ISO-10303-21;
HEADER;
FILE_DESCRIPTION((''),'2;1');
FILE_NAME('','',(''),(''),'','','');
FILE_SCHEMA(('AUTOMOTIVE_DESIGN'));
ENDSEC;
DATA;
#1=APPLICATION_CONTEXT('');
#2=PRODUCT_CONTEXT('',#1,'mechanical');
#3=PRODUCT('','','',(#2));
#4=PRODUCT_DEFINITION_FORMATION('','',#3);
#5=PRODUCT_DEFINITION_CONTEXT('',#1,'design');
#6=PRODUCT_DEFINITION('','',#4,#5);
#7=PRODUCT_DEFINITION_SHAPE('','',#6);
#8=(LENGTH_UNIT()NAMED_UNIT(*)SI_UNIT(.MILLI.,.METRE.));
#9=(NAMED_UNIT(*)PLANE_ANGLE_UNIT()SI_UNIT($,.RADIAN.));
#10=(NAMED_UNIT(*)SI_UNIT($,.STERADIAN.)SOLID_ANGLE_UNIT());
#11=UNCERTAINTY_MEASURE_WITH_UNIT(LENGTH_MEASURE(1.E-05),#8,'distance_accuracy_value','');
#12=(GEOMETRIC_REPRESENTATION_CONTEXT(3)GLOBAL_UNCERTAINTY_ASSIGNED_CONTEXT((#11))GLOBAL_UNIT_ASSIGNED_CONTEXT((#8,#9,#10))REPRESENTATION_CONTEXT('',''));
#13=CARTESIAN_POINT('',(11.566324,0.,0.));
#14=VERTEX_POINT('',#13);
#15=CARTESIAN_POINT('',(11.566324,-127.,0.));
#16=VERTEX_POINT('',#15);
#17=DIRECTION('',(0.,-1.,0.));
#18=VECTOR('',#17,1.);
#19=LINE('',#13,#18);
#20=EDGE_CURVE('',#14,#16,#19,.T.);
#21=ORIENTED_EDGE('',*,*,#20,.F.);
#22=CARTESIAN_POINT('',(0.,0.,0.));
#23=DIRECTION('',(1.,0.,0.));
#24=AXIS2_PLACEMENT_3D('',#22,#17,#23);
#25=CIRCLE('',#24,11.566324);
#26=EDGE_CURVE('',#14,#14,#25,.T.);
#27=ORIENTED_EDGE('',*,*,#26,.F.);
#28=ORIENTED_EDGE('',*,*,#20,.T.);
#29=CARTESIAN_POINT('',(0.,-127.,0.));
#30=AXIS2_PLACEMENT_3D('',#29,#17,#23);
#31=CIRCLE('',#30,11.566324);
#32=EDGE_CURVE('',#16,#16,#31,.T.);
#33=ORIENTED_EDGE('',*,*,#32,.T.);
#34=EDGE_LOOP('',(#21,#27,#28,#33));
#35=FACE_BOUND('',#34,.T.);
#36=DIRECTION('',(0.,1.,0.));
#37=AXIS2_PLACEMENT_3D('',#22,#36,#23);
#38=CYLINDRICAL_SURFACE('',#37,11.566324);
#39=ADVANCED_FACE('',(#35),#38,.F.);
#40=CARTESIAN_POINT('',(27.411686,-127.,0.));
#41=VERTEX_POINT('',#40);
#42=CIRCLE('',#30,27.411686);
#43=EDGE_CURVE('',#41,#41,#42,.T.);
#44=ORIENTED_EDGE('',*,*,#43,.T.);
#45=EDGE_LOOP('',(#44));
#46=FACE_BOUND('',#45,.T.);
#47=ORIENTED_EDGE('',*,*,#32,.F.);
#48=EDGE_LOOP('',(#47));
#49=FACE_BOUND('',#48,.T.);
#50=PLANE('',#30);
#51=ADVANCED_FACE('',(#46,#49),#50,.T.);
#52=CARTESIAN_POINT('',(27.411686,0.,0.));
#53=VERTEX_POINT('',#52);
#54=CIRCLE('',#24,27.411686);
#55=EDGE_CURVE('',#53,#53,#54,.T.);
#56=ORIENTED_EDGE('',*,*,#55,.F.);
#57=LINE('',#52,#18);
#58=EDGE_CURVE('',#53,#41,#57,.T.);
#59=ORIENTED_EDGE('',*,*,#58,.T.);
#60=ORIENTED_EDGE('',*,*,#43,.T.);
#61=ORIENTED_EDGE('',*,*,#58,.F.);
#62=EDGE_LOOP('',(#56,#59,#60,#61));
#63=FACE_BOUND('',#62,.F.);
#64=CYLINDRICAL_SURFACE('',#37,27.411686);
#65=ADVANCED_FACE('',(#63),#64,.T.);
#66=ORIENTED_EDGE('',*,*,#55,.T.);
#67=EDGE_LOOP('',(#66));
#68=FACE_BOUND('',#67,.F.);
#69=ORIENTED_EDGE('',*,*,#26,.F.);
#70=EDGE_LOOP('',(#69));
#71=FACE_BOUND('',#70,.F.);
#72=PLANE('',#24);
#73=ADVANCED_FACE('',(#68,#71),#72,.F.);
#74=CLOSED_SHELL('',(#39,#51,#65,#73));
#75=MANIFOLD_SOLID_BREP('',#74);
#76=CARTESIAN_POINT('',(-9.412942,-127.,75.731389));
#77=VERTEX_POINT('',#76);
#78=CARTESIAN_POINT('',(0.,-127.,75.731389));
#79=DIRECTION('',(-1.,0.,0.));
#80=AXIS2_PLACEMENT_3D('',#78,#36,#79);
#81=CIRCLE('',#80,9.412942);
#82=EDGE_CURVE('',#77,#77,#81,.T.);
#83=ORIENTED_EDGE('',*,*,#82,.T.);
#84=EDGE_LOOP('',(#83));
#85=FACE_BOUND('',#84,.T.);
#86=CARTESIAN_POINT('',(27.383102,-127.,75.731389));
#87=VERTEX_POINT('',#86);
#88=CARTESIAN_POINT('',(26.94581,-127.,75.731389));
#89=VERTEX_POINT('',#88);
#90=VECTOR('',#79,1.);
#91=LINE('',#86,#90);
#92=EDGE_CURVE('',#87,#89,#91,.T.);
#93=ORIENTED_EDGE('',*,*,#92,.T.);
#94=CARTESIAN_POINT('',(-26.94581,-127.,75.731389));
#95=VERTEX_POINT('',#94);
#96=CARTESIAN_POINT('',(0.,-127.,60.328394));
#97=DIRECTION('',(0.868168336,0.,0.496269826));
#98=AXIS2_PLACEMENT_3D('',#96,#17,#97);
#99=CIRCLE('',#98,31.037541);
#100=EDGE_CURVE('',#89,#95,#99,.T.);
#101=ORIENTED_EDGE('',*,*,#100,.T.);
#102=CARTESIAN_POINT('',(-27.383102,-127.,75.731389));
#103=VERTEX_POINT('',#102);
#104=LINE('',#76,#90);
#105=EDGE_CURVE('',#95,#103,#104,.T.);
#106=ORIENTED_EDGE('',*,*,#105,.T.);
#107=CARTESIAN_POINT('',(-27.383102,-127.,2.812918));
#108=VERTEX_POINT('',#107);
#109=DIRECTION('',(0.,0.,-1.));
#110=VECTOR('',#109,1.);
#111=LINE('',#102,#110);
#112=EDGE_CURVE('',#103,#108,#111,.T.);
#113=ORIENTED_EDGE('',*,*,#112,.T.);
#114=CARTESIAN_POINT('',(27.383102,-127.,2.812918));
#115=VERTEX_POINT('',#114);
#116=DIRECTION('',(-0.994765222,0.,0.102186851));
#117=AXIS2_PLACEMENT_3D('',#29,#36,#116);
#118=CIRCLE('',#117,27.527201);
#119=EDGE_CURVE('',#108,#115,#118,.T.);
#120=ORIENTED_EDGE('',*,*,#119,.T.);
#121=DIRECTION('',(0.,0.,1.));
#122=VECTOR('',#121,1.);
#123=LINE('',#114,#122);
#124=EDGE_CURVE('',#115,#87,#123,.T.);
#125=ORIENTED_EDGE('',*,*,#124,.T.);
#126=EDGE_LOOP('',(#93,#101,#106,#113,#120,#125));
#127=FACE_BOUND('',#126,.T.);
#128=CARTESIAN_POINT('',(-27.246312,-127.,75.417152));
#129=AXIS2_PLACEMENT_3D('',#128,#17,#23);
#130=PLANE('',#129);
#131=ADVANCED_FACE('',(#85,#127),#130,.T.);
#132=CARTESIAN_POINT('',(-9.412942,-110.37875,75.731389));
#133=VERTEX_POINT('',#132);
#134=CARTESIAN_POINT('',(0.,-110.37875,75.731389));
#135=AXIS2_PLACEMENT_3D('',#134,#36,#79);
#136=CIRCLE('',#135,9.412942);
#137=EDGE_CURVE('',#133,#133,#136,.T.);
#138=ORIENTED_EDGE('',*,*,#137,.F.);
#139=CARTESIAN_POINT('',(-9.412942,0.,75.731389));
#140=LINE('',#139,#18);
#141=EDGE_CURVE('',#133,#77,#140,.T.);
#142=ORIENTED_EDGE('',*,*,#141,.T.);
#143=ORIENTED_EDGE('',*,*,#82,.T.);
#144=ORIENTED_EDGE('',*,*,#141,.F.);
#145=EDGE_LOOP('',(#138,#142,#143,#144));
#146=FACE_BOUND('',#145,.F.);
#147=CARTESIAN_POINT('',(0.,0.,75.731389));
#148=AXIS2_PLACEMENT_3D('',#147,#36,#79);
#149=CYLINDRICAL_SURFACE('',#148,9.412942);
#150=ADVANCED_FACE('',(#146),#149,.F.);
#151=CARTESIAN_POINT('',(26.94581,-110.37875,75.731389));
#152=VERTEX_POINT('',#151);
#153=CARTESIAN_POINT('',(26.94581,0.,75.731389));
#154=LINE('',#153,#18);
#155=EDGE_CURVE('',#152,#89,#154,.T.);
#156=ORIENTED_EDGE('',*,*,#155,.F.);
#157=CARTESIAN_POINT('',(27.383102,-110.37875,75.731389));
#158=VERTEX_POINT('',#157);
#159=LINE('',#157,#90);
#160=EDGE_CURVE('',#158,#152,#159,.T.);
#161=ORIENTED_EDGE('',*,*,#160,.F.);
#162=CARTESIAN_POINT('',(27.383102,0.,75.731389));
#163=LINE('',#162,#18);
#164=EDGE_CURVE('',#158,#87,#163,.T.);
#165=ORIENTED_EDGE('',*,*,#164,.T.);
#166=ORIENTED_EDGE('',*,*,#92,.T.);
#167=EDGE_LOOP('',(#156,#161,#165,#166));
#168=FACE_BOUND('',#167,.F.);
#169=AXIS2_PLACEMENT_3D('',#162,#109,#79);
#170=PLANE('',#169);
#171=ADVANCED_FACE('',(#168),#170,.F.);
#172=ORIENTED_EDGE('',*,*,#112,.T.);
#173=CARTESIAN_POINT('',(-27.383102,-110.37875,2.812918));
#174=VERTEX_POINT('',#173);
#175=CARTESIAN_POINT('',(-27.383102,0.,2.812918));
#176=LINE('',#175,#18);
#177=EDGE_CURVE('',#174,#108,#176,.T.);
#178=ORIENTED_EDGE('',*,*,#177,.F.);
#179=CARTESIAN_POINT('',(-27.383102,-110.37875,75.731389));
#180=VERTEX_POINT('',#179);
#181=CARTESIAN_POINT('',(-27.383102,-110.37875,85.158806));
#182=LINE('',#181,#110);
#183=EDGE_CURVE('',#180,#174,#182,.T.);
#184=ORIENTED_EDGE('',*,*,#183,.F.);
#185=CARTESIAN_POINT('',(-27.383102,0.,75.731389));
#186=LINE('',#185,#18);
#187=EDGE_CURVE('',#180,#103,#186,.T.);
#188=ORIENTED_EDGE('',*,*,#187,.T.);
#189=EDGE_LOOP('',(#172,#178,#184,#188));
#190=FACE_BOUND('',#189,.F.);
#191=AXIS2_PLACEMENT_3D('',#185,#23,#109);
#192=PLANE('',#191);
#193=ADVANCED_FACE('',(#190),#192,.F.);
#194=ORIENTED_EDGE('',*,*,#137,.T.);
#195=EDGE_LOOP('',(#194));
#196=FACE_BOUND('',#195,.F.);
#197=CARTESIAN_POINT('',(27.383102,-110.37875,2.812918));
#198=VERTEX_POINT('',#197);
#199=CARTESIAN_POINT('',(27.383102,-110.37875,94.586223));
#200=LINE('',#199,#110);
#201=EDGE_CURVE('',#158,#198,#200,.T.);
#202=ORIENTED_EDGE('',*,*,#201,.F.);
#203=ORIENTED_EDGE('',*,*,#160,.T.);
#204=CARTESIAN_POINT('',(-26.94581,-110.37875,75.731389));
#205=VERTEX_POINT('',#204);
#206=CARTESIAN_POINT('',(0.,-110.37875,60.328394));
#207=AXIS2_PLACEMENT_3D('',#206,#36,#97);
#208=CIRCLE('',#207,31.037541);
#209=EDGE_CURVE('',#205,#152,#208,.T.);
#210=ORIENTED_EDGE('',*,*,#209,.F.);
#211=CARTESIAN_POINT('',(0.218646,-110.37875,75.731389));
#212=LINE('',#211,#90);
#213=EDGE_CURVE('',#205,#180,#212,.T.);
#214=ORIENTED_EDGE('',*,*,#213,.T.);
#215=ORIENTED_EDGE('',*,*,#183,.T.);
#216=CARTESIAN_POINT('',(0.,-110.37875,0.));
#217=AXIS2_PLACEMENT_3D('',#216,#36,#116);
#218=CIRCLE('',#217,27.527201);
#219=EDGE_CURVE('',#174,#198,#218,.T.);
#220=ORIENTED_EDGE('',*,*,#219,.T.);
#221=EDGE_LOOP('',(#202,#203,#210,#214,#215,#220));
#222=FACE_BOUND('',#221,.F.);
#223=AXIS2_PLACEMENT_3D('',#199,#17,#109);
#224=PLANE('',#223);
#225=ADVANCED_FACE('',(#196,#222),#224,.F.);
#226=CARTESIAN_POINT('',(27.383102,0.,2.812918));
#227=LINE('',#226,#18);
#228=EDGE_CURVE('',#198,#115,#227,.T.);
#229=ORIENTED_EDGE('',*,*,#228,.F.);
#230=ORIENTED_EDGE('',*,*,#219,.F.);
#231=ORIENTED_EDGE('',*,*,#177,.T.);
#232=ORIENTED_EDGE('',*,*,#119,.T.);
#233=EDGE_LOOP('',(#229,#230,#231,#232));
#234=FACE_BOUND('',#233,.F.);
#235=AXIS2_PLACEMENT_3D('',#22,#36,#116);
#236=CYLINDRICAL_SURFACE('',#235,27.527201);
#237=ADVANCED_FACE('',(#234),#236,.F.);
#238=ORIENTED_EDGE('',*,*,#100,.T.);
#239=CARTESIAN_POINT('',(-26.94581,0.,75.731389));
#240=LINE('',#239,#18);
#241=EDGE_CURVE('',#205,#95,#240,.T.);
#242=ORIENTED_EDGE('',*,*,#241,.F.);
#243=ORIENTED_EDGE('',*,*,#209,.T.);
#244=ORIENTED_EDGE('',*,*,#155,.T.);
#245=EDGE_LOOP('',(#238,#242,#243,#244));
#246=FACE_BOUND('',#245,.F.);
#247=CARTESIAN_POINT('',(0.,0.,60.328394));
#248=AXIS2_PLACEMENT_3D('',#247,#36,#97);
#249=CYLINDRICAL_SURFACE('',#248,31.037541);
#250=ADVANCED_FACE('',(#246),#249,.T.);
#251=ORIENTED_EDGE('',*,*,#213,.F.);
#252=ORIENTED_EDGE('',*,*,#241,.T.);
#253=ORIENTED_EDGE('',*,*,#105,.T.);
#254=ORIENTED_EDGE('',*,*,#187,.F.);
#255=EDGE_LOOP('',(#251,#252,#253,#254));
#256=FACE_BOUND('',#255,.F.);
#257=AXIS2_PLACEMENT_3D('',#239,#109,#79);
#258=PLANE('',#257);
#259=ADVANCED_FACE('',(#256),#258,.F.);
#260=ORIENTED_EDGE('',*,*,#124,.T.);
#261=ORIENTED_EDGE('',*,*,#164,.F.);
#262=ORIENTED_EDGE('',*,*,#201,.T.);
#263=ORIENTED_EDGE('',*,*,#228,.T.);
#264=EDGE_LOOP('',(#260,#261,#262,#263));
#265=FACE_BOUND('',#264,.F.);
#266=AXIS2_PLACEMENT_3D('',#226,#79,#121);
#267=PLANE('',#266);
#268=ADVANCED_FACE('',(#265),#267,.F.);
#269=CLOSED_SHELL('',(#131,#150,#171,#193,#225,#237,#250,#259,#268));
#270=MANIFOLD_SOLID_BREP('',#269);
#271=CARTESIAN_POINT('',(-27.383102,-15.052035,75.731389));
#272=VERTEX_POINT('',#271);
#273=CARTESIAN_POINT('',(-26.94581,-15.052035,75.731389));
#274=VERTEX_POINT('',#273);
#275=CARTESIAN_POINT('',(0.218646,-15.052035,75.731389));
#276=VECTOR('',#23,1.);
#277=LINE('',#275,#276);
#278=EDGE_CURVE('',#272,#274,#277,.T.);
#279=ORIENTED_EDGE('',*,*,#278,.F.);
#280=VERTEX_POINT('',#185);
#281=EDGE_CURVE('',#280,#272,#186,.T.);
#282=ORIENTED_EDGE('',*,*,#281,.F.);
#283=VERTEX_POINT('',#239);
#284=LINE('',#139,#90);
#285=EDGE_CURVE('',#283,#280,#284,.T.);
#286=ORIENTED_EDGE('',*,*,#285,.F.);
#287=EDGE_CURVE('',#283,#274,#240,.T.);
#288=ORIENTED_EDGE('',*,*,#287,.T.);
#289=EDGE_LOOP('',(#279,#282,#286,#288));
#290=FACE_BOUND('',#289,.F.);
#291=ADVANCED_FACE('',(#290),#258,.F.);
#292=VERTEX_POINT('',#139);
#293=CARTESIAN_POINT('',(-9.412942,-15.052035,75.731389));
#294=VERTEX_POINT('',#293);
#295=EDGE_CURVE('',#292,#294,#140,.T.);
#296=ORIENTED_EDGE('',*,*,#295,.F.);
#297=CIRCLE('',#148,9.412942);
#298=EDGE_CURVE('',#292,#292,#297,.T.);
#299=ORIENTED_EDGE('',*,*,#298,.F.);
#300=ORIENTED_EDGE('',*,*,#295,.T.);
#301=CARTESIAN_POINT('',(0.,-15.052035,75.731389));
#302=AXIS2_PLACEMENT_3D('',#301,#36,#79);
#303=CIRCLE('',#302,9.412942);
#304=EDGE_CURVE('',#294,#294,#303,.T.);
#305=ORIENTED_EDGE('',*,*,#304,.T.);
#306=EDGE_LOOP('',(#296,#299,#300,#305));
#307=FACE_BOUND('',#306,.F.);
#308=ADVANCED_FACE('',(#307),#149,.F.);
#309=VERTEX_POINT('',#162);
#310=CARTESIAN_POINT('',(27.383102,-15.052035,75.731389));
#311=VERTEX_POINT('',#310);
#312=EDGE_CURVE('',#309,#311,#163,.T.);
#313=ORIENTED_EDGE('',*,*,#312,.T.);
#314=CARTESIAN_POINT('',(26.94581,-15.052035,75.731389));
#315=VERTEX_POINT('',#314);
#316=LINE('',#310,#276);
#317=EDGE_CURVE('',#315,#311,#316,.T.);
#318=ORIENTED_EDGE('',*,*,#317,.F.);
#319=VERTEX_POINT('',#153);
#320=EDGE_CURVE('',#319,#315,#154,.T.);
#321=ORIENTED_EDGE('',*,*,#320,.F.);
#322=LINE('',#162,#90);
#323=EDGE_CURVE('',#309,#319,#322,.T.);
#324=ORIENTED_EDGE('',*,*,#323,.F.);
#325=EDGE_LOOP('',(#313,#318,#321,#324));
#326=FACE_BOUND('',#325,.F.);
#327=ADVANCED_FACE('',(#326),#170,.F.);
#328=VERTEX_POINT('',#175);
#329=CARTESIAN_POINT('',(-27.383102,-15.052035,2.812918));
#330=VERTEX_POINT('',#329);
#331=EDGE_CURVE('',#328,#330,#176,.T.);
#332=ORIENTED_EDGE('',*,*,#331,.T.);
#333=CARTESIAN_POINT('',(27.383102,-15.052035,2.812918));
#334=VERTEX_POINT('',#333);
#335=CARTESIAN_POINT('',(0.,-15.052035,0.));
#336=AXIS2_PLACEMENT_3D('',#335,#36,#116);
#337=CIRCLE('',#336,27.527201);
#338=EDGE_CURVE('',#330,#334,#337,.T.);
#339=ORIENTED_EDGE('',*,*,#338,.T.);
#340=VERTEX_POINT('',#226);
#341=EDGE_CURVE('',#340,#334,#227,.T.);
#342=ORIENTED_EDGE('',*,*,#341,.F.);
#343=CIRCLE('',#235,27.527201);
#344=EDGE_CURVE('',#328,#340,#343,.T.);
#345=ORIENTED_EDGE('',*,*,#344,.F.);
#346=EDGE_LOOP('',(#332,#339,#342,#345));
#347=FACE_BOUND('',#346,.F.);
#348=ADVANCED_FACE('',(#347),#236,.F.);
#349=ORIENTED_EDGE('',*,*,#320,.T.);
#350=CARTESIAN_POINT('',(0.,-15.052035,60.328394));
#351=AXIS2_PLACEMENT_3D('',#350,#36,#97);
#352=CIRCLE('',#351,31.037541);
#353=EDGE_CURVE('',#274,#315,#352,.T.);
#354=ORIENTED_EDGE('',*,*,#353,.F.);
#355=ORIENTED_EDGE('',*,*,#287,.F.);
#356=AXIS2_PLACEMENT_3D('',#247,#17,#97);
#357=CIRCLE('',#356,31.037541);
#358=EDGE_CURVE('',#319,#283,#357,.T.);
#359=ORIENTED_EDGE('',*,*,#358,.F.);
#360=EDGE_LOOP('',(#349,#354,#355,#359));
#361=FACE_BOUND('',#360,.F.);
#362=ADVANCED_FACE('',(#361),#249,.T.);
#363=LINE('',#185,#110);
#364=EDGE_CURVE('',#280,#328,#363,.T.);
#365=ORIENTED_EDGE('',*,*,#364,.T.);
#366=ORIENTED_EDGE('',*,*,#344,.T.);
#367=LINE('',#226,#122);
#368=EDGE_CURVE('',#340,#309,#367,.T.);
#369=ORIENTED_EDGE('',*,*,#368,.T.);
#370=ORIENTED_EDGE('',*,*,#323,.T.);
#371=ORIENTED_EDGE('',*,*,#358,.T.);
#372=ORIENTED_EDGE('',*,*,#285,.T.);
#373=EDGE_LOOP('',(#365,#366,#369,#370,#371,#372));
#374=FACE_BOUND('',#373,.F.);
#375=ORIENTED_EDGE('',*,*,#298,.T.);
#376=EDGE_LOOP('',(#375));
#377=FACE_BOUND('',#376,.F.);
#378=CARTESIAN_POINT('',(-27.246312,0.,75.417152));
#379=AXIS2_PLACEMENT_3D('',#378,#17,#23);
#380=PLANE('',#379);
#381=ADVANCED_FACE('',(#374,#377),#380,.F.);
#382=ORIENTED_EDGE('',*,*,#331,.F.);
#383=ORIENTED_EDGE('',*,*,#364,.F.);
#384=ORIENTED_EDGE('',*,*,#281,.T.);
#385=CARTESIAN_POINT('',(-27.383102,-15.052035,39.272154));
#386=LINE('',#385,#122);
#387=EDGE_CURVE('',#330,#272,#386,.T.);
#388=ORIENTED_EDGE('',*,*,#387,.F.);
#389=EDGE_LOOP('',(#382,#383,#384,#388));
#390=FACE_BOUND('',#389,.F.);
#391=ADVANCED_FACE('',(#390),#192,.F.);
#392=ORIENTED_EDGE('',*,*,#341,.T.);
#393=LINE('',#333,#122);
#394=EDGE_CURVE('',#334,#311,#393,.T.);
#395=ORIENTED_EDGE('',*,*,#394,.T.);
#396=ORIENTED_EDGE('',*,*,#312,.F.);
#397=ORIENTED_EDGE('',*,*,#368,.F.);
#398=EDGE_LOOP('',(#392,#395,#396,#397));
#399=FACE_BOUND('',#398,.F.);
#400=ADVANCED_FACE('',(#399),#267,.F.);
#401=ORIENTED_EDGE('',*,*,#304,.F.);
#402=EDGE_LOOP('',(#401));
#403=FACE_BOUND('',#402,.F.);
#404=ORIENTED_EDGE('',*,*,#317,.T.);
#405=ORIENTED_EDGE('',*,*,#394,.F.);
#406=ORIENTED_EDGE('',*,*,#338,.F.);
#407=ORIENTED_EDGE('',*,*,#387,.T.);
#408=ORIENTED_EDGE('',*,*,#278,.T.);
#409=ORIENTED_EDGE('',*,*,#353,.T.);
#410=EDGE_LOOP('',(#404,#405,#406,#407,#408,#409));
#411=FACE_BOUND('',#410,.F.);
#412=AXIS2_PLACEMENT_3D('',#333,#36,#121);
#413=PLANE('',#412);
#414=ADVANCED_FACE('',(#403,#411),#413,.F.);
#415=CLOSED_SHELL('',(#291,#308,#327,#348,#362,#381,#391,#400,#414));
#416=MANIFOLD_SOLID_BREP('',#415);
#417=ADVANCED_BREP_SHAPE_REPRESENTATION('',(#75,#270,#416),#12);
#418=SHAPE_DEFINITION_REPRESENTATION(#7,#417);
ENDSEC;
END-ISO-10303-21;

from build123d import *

# Parameters (mm, degrees)
F0_R     = 27.4116856275
F0_R_2   = 11.5663237111
F1_DEPTH = 127
F3_DEPTH = 127
F4_W     = 95.3267142177
F4_H     = 18.8548341393
F4_H_2   = 72.9184712529
F5_DEPTH = 54.7957877316


# Not quite as in the source:
# - a feature of the source that left no trace in its solid (it failed there, or was rolled back) is left out


with BuildPart() as f1:
    # F0 (on Front) → F1 (new body)
    with BuildSketch(Plane.XZ):
        Circle(F0_R)
        Circle(F0_R_2, mode=Mode.SUBTRACT)
    extrude(amount=F1_DEPTH)


with BuildPart() as f3:
    # F2 (on Front) → F3 (new body)
    with BuildSketch(Plane.XZ):
        with BuildLine():
            Line((-26.9458102859, 75.7313892245), (-27.3831021041, 75.7313892245))
            Line((-27.3831021041, 75.7313892245), (-27.3831021041, 74.9398508998))
            ThreePointArc((-27.3831021041, 74.9398508998), (-27.1673390968, 75.3372127448), (-26.9458102859, 75.7313892245))
        make_face()
        with BuildLine():
            Line((-9.4129424542, 75.7313892245), (-26.9458102859, 75.7313892245))
            ThreePointArc((-26.9458102859, 75.7313892245), (-27.1673390968, 75.3372127448), (-27.3831021041, 74.9398508998))
            Line((-27.3831021041, 74.9398508998), (-27.3831021041, 2.8129179717))
            ThreePointArc((-27.3831021041, 2.8129179717), (0, 27.5272008813), (27.3831021041, 2.8129179717))
            Line((27.3831021041, 2.8129179717), (27.3831021041, 74.9398508998))
            ThreePointArc((27.3831021041, 74.9398508998), (27.1673390968, 75.3372127448), (26.9458102859, 75.7313892245))
            Line((26.9458102859, 75.7313892245), (9.4129424542, 75.7313892245))
            ThreePointArc((9.4129424542, 75.7313892245), (0, 66.3184467703), (-9.4129424542, 75.7313892245))
        make_face()
        with BuildLine():
            ThreePointArc((26.9458102859, 75.7313892245), (0, 91.3659351286), (-26.9458102859, 75.7313892245))
            Line((-26.9458102859, 75.7313892245), (-9.4129424542, 75.7313892245))
            ThreePointArc((-9.4129424542, 75.7313892245), (0, 85.1443316787), (9.4129424542, 75.7313892245))
            Line((9.4129424542, 75.7313892245), (26.9458102859, 75.7313892245))
        make_face()
        with BuildLine():
            Line((27.3831021041, 75.7313892245), (26.9458102859, 75.7313892245))
            ThreePointArc((26.9458102859, 75.7313892245), (27.1673390968, 75.3372127448), (27.3831021041, 74.9398508998))
            Line((27.3831021041, 74.9398508998), (27.3831021041, 75.7313892245))
        make_face()
    extrude(amount=F3_DEPTH)

    # F4 (on face) → F5 (cut, through all)
    with BuildSketch(Plane.YZ.offset(27.3831021041)):
        with Locations((-62.7153925598, 85.1588062942)):
            Rectangle(F4_W, F4_H)
        with Locations((-62.7153925598, 39.2721535981)):
            Rectangle(F4_W, F4_H_2)
    extrude(amount=-F5_DEPTH, mode=Mode.SUBTRACT)


solid = Compound([f1.part, f3.part])
